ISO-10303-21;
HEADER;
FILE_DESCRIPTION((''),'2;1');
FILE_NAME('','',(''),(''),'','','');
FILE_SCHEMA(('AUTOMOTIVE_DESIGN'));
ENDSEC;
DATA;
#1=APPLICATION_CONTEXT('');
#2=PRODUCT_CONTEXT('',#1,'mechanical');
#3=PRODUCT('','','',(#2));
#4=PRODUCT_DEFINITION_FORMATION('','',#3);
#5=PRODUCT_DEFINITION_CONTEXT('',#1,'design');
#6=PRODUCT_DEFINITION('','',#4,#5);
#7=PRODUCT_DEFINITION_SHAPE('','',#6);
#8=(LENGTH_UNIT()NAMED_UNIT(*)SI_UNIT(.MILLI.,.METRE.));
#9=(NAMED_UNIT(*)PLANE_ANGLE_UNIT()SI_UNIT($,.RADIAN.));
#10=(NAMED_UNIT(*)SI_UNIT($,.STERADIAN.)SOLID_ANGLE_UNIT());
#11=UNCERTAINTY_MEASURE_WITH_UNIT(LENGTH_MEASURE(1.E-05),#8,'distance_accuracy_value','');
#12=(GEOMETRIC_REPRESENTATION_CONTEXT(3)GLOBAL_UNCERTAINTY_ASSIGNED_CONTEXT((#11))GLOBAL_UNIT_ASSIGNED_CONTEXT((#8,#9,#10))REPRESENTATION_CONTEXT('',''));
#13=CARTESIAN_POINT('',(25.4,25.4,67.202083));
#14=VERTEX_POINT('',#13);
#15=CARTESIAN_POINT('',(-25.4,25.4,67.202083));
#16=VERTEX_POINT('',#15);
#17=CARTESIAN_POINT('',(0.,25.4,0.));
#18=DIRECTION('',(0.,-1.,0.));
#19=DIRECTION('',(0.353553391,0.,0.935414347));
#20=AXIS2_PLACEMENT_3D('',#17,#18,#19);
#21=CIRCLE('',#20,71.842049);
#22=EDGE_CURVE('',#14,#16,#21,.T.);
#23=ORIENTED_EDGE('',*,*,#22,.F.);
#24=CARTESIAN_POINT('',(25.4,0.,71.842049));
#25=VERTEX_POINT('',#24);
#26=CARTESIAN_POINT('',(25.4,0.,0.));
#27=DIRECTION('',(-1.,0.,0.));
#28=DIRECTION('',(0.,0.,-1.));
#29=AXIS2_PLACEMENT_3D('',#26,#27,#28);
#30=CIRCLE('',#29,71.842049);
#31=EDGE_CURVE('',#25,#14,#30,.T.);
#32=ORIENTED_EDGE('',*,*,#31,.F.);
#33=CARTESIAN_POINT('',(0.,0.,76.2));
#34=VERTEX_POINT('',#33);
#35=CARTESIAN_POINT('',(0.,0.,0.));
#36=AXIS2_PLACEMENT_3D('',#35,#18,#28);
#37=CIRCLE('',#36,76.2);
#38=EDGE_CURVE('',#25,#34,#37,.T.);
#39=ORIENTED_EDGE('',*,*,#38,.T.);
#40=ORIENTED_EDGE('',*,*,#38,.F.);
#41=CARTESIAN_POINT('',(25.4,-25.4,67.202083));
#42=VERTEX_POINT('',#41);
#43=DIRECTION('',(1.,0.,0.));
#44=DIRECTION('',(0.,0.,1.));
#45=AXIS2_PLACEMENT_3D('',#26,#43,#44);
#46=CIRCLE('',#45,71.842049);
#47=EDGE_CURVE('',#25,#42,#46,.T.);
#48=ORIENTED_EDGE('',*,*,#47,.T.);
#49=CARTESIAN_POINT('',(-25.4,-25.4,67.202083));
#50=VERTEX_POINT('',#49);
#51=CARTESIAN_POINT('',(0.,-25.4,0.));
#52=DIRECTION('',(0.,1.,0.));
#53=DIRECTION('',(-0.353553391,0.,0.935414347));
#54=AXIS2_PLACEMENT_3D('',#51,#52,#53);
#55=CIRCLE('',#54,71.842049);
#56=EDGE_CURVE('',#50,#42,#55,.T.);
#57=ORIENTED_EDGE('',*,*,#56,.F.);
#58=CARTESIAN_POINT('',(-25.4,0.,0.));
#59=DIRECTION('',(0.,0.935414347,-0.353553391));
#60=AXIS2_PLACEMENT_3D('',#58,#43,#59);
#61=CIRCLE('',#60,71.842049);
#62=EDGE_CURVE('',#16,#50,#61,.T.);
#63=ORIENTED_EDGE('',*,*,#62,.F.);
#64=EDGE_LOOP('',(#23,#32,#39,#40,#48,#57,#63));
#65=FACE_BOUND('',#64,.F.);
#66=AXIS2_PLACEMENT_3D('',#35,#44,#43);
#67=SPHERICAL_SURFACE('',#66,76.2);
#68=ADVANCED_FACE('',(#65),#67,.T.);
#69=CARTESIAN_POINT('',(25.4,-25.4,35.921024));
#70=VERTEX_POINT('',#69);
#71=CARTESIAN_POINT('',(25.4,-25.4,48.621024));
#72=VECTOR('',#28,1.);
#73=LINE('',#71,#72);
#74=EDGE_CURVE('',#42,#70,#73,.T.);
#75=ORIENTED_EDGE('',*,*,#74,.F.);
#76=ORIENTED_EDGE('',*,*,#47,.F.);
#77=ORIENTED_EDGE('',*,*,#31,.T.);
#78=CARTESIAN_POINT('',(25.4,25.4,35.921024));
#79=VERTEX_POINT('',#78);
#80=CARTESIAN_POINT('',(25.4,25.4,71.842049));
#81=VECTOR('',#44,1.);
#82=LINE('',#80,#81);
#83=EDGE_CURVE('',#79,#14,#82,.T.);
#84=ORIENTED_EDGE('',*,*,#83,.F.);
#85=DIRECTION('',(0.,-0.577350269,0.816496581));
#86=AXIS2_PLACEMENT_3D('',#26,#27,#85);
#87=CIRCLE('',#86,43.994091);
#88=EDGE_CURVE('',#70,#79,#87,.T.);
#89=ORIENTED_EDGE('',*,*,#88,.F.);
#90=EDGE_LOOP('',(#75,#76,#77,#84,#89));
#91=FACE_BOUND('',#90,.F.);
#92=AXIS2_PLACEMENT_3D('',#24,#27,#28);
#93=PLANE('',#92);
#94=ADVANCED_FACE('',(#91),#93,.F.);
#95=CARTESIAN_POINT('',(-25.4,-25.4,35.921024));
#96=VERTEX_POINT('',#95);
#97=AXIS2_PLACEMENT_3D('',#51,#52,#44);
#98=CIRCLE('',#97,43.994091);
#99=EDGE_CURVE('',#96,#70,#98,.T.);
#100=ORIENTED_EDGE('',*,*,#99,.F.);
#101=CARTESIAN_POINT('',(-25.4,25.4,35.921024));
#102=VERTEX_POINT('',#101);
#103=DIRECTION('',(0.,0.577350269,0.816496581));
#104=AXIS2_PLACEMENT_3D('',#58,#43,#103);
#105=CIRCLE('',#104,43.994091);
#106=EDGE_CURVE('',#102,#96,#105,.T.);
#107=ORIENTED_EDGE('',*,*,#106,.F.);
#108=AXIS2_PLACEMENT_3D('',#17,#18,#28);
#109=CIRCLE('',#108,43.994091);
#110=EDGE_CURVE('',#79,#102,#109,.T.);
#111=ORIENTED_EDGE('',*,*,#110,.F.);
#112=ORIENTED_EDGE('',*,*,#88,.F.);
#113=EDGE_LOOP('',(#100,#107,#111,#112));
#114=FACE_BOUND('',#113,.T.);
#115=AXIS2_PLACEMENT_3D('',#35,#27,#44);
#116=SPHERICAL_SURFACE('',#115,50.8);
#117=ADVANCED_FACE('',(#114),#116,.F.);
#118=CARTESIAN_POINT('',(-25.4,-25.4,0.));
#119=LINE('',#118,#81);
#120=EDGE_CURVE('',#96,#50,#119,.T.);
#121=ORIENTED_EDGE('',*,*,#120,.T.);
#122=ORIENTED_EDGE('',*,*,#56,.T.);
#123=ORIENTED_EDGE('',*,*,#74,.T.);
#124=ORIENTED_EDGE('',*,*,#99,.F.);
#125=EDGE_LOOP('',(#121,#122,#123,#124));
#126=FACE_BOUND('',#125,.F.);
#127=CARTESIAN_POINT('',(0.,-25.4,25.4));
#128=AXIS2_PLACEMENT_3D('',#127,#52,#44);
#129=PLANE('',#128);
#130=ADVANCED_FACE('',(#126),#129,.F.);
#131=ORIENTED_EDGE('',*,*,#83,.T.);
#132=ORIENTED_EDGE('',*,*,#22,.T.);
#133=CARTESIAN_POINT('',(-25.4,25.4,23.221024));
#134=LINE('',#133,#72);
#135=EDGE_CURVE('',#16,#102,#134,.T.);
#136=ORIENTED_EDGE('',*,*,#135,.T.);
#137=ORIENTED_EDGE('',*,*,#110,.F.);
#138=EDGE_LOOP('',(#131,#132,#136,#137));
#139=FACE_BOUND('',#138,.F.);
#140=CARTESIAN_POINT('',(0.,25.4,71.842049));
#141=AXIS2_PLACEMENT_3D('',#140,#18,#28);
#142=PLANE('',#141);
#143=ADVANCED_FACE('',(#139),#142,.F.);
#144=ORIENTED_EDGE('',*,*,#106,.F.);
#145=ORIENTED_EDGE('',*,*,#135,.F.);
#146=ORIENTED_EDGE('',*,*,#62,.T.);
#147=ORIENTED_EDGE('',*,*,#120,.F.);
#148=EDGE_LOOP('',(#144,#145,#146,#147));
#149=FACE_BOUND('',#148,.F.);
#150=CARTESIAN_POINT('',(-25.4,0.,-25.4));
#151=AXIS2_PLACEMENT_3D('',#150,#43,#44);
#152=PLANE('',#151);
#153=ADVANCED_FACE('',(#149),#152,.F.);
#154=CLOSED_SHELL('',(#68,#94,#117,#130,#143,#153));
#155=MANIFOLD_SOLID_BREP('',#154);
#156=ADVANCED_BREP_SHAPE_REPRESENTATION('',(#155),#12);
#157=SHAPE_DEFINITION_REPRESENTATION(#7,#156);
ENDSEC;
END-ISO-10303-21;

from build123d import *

# Parameters (mm, degrees)
F4_DEPTH = 127
F3_W     = 50.8
F3_H     = 50.8
F5_DEPTH = 127


with BuildPart() as f1:
    # F0 (on Front) → F1 (revolve)
    with BuildSketch(Plane.XZ):
        with BuildLine():
            Line((0, 0), (0, -76.2))
            ThreePointArc((0, -76.2), (76.2, 0), (0, 76.2))
            Line((0, 76.2), (0, 0))
        make_face()
    revolve(axis=Axis((0, 0, 0), (0, 0, -1)))

    # F2 (on Front) → F4 (cut, symmetric)
    with BuildSketch(Plane.XZ):
        with BuildLine():
            Line((-25.4, 25.4), (-25.4, 71.8420489686))
            ThreePointArc((-25.4, 71.8420489686), (-53.8815367264, 53.8815367264), (-71.8420489686, 25.4))
            Line((-71.8420489686, 25.4), (-25.4, 25.4))
        make_face()
        with BuildLine():
            Line((-25.4, -25.4), (-25.4, 25.4))
            Line((-25.4, 25.4), (-71.8420489686, 25.4))
            ThreePointArc((-71.8420489686, 25.4), (-76.2, 0), (-71.8420489686, -25.4))
            Line((-71.8420489686, -25.4), (-25.4, -25.4))
        make_face()
        with BuildLine():
            ThreePointArc((-71.8420489686, -25.4), (-53.8815367264, -53.8815367264), (-25.4, -71.8420489686))
            Line((-25.4, -71.8420489686), (-25.4, -25.4))
            Line((-25.4, -25.4), (-71.8420489686, -25.4))
        make_face()
        with BuildLine():
            ThreePointArc((-25.4, -71.8420489686), (0, -76.2), (25.4, -71.8420489686))
            Line((25.4, -71.8420489686), (25.4, -25.4))
            Line((25.4, -25.4), (-25.4, -25.4))
            Line((-25.4, -25.4), (-25.4, -71.8420489686))
        make_face()
        with BuildLine():
            ThreePointArc((25.4, -71.8420489686), (53.8815367264, -53.8815367264), (71.8420489686, -25.4))
            Line((71.8420489686, -25.4), (25.4, -25.4))
            Line((25.4, -25.4), (25.4, -71.8420489686))
        make_face()
        with BuildLine():
            ThreePointArc((71.8420489686, -25.4), (75.1026102456, -12.8855707789), (76.2, 0))
            ThreePointArc((76.2, 0), (75.1026102456, 12.8855707789), (71.8420489686, 25.4))
            Line((71.8420489686, 25.4), (25.4, 25.4))
            Line((25.4, 25.4), (25.4, -25.4))
            Line((25.4, -25.4), (71.8420489686, -25.4))
        make_face()
        with BuildLine():
            Line((25.4, 25.4), (71.8420489686, 25.4))
            ThreePointArc((71.8420489686, 25.4), (53.8815367264, 53.8815367264), (25.4, 71.8420489686))
            Line((25.4, 71.8420489686), (25.4, 25.4))
        make_face()
    extrude(amount=F4_DEPTH, both=True, mode=Mode.SUBTRACT)

    # F3 (on Right) → F5 (cut, symmetric)
    with BuildSketch(Plane.YZ):
        with BuildLine():
            ThreePointArc((71.8420489686, -25.4), (75.1026102456, -12.8855707789), (76.2, 0))
            ThreePointArc((76.2, 0), (75.1026102456, 12.8855707789), (71.8420489686, 25.4))
            Line((71.8420489686, 25.4), (25.4, 25.4))
            Line((25.4, 25.4), (25.4, -25.4))
            Line((25.4, -25.4), (71.8420489686, -25.4))
        make_face()
        with BuildLine():
            Line((25.4, 25.4), (71.8420489686, 25.4))
            ThreePointArc((71.8420489686, 25.4), (53.8815367264, 53.8815367264), (25.4, 71.8420489686))
            Line((25.4, 71.8420489686), (25.4, 25.4))
        make_face()
        Rectangle(F3_W, F3_H)
        with BuildLine():
            ThreePointArc((-25.4, -71.8420489686), (0, -76.2), (25.4, -71.8420489686))
            Line((25.4, -71.8420489686), (25.4, -25.4))
            Line((25.4, -25.4), (-25.4, -25.4))
            Line((-25.4, -25.4), (-25.4, -71.8420489686))
        make_face()
        with BuildLine():
            Line((-25.4, 25.4), (-25.4, 71.8420489686))
            ThreePointArc((-25.4, 71.8420489686), (-53.8815367264, 53.8815367264), (-71.8420489686, 25.4))
            Line((-71.8420489686, 25.4), (-25.4, 25.4))
        make_face()
        with BuildLine():
            Line((-25.4, -25.4), (-25.4, 25.4))
            Line((-25.4, 25.4), (-71.8420489686, 25.4))
            ThreePointArc((-71.8420489686, 25.4), (-76.2, 0), (-71.8420489686, -25.4))
            Line((-71.8420489686, -25.4), (-25.4, -25.4))
        make_face()
    extrude(amount=F5_DEPTH, both=True, mode=Mode.SUBTRACT)

    # F6 (on Front) → F7 (revolve, cut)
    with BuildSketch(Plane.XZ):
        with BuildLine():
            Line((0, 0), (50.8, 0))
            ThreePointArc((50.8, 0), (0, 50.8), (-50.8, 0))
            Line((-50.8, 0), (0, 0))
        make_face()
    revolve(axis=Axis((25.4, 0, 0), (1, 0, 0)), mode=Mode.SUBTRACT)


solid = f1.part
